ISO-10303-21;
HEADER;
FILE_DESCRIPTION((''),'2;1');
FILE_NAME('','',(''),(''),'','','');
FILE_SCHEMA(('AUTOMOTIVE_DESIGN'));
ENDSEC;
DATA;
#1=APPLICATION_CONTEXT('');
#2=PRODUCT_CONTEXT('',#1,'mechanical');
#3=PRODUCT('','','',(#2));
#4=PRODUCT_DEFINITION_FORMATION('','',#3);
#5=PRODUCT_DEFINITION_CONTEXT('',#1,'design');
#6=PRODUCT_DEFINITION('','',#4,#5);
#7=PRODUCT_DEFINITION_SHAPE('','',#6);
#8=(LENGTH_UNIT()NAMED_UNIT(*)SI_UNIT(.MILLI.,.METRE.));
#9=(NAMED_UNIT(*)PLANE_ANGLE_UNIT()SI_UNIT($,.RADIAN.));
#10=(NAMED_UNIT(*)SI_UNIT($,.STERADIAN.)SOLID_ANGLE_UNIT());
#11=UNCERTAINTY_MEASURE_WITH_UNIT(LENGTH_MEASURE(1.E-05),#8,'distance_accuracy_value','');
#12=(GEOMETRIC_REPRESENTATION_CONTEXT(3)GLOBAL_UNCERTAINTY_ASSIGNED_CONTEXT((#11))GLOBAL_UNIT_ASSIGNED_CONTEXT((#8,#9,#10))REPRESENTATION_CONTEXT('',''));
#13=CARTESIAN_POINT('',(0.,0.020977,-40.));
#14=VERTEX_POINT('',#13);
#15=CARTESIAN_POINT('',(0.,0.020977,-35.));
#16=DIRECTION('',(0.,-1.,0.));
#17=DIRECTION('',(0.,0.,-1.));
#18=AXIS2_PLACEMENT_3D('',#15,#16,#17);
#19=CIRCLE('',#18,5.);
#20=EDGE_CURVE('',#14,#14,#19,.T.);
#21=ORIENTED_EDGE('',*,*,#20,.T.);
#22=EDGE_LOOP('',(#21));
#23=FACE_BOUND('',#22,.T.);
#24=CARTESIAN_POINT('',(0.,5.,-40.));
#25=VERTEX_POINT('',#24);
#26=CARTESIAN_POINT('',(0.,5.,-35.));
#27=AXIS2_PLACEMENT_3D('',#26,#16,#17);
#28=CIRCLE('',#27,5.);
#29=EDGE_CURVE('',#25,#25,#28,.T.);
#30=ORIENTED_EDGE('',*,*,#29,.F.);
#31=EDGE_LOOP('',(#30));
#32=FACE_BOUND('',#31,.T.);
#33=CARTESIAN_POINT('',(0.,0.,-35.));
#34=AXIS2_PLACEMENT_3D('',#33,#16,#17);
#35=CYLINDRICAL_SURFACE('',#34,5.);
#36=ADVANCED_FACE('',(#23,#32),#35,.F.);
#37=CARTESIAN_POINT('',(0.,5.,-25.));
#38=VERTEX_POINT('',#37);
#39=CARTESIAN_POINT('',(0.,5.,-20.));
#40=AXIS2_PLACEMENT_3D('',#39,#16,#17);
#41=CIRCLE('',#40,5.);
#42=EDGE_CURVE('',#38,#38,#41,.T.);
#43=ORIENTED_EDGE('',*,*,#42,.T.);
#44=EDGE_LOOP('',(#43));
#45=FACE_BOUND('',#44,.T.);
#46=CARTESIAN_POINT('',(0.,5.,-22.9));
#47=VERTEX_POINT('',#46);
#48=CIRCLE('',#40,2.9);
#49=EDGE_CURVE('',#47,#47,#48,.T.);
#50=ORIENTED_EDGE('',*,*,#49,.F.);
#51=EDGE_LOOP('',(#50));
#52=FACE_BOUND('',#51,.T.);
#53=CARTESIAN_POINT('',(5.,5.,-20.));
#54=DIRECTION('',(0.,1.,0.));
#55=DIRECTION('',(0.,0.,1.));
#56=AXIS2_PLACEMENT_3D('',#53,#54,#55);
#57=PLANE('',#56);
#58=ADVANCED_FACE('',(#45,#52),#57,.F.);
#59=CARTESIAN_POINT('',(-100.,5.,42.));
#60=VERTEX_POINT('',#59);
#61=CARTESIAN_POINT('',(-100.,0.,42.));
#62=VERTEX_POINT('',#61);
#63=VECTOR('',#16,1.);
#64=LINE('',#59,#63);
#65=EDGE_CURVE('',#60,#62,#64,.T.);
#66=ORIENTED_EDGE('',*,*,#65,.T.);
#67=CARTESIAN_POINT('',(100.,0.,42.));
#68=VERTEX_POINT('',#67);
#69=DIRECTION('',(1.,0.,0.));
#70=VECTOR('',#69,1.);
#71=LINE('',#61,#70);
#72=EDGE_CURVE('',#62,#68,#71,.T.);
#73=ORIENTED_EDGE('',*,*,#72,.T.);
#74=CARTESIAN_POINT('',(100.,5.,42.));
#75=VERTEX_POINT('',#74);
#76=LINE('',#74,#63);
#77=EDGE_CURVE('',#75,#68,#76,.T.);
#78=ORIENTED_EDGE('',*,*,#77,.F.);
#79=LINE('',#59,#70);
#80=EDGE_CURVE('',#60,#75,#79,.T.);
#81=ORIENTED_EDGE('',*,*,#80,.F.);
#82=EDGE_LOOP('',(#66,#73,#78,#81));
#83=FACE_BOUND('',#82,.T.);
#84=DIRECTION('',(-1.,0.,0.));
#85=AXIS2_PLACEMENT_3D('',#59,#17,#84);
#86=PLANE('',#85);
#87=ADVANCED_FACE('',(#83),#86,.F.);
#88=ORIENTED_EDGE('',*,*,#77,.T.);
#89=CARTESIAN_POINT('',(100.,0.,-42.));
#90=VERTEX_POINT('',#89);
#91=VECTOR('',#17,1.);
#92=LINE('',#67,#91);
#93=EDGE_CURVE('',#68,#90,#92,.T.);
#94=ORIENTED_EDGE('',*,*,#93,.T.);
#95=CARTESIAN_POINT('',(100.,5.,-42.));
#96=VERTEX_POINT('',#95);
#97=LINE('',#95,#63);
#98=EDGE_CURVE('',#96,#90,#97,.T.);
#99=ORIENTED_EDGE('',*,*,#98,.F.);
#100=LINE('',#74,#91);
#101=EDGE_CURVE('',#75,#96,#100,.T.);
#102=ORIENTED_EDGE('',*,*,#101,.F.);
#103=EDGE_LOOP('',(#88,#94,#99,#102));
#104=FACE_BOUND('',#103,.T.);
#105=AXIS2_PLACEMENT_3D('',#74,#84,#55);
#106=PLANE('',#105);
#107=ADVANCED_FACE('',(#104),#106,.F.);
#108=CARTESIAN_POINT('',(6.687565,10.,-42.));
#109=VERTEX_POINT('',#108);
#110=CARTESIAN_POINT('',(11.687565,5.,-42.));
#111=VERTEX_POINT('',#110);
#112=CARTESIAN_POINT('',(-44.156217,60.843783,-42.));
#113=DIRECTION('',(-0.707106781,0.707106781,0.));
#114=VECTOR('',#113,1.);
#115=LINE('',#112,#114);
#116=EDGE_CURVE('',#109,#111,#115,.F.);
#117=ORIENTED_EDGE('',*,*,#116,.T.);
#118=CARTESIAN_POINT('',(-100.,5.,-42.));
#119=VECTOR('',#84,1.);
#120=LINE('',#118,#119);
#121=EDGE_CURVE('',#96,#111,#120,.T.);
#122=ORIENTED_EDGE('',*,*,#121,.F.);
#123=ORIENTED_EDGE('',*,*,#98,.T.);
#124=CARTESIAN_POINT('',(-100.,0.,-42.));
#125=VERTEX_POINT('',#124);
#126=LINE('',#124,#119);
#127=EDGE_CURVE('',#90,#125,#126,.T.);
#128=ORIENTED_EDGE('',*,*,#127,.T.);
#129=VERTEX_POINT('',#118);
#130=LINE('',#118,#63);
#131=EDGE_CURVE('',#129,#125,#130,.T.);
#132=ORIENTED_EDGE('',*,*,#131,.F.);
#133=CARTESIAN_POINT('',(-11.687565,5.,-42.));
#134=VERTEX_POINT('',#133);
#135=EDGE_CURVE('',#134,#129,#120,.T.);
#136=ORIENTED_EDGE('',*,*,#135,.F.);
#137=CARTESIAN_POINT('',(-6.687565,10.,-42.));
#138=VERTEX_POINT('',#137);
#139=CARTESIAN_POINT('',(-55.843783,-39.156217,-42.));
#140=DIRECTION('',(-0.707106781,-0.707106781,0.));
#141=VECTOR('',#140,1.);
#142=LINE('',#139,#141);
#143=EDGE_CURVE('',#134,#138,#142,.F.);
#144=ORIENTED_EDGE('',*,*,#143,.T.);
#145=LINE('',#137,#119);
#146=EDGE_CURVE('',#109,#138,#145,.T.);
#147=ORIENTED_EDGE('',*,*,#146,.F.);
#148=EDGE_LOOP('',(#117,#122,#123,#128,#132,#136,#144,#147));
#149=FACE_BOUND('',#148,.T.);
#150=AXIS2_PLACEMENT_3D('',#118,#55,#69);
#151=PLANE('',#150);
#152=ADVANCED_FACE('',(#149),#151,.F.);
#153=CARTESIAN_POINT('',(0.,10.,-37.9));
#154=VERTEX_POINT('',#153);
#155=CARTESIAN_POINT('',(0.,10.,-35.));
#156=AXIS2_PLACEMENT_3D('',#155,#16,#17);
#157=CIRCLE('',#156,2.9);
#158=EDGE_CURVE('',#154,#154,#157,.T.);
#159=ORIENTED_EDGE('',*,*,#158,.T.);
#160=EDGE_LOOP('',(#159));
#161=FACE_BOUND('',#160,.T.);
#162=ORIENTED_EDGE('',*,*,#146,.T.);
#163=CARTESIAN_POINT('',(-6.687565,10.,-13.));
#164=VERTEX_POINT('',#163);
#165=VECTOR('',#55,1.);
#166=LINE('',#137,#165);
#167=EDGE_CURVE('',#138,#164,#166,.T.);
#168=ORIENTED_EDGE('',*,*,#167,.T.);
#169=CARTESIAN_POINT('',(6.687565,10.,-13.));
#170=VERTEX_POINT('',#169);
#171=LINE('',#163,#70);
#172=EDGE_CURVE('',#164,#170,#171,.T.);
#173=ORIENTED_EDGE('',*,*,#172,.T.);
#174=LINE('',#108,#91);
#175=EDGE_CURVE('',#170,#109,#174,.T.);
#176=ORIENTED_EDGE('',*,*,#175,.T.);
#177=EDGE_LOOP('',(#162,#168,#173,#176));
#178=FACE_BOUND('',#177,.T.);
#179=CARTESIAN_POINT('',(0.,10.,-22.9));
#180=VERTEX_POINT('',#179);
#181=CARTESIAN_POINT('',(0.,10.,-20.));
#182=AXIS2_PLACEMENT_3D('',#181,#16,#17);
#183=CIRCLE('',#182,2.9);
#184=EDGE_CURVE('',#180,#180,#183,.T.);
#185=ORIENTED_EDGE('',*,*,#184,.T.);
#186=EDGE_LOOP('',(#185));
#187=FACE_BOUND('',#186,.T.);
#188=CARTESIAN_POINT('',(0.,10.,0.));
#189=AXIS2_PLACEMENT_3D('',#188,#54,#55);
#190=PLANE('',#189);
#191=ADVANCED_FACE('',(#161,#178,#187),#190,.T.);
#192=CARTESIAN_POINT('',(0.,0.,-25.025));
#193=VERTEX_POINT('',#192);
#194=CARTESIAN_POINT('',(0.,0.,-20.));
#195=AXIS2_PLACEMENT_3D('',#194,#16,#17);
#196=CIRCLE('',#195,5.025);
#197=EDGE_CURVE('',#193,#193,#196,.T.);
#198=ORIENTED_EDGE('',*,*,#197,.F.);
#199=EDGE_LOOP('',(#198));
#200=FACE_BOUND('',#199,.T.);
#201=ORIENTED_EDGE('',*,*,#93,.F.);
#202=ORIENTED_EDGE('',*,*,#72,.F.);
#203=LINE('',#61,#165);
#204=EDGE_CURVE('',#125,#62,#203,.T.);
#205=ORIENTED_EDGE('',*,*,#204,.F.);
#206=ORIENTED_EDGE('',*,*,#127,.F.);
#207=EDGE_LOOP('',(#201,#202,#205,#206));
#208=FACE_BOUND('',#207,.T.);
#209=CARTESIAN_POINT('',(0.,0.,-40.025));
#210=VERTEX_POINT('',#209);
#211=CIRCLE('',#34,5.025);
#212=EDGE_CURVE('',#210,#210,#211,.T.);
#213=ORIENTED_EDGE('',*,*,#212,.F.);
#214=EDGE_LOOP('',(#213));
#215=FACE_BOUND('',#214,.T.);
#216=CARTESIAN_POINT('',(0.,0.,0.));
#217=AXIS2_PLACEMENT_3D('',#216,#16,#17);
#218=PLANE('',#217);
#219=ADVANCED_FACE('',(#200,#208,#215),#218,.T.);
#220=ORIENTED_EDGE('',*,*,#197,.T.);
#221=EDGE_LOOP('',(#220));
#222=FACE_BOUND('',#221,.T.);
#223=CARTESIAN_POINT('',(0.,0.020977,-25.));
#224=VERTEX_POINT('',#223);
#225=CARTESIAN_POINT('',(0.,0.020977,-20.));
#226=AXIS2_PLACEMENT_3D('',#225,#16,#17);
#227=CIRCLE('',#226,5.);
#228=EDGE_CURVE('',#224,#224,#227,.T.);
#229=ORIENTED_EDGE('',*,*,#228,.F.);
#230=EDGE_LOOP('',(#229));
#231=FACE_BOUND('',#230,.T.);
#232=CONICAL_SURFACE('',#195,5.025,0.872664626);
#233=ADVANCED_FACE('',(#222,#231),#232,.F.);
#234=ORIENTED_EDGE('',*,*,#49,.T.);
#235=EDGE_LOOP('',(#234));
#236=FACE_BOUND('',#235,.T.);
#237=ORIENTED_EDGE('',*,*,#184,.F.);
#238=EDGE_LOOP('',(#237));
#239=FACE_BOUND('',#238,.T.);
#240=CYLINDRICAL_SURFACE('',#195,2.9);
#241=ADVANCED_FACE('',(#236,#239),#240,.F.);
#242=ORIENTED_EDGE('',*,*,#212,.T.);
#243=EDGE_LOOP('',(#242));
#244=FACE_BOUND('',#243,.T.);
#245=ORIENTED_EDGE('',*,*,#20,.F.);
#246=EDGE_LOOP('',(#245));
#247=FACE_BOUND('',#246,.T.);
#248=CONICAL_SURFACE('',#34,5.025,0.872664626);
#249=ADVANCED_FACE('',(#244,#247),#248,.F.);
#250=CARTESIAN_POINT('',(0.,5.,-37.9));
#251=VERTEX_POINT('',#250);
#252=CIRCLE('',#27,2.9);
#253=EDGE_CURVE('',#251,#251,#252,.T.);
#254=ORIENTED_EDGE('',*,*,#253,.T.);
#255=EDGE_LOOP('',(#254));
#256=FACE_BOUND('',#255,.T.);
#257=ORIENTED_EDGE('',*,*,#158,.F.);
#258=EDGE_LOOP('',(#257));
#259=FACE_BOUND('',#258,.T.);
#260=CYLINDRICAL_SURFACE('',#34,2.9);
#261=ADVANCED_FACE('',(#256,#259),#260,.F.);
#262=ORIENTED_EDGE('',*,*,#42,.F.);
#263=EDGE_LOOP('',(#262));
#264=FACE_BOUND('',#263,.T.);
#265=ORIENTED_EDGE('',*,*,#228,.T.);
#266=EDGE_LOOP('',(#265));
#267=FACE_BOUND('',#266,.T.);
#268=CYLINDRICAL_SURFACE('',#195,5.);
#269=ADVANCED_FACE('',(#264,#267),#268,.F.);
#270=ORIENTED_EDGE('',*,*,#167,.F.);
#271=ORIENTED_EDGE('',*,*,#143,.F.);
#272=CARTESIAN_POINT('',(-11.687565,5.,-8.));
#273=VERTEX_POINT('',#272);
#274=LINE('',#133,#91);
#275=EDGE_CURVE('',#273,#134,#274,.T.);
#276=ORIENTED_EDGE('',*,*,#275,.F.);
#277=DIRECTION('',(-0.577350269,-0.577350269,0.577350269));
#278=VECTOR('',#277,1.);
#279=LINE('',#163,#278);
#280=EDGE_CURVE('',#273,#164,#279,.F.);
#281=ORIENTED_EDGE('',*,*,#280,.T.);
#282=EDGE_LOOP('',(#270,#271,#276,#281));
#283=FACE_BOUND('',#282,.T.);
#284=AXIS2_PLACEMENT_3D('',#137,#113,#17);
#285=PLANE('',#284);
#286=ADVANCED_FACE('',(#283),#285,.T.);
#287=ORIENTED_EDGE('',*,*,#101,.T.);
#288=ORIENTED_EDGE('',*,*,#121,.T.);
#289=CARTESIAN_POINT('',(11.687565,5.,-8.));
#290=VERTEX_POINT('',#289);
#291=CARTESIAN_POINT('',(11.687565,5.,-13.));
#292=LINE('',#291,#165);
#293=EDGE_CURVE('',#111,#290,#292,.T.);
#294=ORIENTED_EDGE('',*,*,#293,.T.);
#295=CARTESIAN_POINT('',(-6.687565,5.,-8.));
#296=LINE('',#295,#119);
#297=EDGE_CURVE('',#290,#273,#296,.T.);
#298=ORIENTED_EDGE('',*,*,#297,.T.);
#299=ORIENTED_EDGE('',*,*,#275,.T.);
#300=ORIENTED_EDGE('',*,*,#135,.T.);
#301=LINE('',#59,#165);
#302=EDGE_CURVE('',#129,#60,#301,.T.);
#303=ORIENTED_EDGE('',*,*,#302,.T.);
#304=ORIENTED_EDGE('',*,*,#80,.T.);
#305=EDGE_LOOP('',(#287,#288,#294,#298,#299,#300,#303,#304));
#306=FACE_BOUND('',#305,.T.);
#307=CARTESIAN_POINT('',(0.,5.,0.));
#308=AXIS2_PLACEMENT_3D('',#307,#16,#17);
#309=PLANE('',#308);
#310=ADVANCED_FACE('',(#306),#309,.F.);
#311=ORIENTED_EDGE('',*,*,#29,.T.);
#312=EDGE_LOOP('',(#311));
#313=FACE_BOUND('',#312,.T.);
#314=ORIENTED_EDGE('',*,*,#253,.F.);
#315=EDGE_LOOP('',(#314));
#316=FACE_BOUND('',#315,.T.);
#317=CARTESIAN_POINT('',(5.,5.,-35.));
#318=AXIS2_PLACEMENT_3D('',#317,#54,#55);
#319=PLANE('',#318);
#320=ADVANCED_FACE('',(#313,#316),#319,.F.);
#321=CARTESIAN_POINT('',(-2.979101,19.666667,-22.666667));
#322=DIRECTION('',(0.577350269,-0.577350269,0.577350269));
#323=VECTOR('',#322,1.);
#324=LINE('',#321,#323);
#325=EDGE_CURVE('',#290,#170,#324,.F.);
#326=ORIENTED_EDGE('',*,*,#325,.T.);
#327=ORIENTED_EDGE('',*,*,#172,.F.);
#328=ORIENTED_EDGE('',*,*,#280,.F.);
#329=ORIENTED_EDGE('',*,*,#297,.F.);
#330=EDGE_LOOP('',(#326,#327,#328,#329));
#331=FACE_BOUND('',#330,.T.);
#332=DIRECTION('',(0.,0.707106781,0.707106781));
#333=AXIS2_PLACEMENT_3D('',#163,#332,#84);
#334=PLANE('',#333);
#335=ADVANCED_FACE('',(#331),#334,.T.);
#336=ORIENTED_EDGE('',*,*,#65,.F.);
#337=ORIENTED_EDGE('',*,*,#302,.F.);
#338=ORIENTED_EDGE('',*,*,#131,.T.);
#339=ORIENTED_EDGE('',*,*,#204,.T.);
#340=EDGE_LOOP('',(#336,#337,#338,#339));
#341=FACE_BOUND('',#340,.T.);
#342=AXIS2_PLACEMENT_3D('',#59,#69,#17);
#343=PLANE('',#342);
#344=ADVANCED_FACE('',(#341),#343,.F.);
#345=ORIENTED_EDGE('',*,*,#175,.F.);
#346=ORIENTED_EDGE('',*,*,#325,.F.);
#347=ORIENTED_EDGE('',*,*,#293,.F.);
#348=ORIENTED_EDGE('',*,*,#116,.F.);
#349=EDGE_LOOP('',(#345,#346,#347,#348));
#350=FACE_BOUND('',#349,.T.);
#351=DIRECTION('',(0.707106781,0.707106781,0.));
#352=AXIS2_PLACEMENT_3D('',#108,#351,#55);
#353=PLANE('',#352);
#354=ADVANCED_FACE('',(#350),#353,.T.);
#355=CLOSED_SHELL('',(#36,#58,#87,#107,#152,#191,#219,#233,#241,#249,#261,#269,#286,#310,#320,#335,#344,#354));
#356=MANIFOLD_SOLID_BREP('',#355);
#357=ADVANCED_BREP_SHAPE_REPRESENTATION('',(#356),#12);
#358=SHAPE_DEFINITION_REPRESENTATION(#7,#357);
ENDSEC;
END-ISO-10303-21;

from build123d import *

# Parameters (mm, degrees)
SKETCH2_W                     = 200
SKETCH2_H                     = 84
BOSS_EXTRUDE1_DEPTH           = 5
SKETCH5_W                     = 13.375130616
SKETCH5_H                     = 29
BOSS_EXTRUDE2_DEPTH           = 5
CBORE_FOR_M5_SHCS4_AT_2_COUNT = 2
CBORE_FOR_M5_SHCS4_AT_2_PITCH = 15
CHAMFER1_SIZE                 = 5


with BuildPart() as part:
    # Sketch2 → Boss-Extrude1 (new body)
    with BuildSketch(Plane(origin=(0, 0, 0), x_dir=(1, 0, 0), z_dir=(0, 1, 0))):
        Rectangle(SKETCH2_W, SKETCH2_H)
    extrude(amount=BOSS_EXTRUDE1_DEPTH)

    # Sketch5 → Boss-Extrude2 (add)
    with BuildSketch(Plane(origin=(0, 5, 0), x_dir=(1, 0, 0), z_dir=(0, 1, 0))):
        with Locations((0, 27.5)):
            Rectangle(SKETCH5_W, SKETCH5_H)
    extrude(amount=BOSS_EXTRUDE2_DEPTH)

    # Sketch4 → CBORE for M5 SHCS4 (revolve, cut)
    with BuildSketch(Plane(origin=(0, 0, -20), x_dir=(0, 0, -1), z_dir=(1, 0, 0))):
        Polygon((0, 0), (0, 10), (2.9, 10), (2.9, 5), (5, 5), (5, 0.020977491), (5.025, 0), align=None)
    cbore_for_m5_shcs4 = revolve(axis=Axis((0, -6.35, -20), (0, 1, 0)), mode=Mode.SUBTRACT)

    # CBORE for M5 SHCS4 at 2: CBORE for M5 SHCS4 ×2
    with Locations(*[(0, 0, -i * CBORE_FOR_M5_SHCS4_AT_2_PITCH) for i in range(1, CBORE_FOR_M5_SHCS4_AT_2_COUNT)]):
        add(cbore_for_m5_shcs4, mode=Mode.SUBTRACT)

    # Chamfer1
    chamfer1_edges = [part.edges().sort_by_distance(p)[0] for p in [
        (-6.687565308, 5, -27.5),
        (0, 5, -13),
        (6.687565308, 5, -27.5),
    ]]
    chamfer(chamfer1_edges, length=CHAMFER1_SIZE - 0.0001)  # a hair under: the kernel refuses the full size


solid = part.part
